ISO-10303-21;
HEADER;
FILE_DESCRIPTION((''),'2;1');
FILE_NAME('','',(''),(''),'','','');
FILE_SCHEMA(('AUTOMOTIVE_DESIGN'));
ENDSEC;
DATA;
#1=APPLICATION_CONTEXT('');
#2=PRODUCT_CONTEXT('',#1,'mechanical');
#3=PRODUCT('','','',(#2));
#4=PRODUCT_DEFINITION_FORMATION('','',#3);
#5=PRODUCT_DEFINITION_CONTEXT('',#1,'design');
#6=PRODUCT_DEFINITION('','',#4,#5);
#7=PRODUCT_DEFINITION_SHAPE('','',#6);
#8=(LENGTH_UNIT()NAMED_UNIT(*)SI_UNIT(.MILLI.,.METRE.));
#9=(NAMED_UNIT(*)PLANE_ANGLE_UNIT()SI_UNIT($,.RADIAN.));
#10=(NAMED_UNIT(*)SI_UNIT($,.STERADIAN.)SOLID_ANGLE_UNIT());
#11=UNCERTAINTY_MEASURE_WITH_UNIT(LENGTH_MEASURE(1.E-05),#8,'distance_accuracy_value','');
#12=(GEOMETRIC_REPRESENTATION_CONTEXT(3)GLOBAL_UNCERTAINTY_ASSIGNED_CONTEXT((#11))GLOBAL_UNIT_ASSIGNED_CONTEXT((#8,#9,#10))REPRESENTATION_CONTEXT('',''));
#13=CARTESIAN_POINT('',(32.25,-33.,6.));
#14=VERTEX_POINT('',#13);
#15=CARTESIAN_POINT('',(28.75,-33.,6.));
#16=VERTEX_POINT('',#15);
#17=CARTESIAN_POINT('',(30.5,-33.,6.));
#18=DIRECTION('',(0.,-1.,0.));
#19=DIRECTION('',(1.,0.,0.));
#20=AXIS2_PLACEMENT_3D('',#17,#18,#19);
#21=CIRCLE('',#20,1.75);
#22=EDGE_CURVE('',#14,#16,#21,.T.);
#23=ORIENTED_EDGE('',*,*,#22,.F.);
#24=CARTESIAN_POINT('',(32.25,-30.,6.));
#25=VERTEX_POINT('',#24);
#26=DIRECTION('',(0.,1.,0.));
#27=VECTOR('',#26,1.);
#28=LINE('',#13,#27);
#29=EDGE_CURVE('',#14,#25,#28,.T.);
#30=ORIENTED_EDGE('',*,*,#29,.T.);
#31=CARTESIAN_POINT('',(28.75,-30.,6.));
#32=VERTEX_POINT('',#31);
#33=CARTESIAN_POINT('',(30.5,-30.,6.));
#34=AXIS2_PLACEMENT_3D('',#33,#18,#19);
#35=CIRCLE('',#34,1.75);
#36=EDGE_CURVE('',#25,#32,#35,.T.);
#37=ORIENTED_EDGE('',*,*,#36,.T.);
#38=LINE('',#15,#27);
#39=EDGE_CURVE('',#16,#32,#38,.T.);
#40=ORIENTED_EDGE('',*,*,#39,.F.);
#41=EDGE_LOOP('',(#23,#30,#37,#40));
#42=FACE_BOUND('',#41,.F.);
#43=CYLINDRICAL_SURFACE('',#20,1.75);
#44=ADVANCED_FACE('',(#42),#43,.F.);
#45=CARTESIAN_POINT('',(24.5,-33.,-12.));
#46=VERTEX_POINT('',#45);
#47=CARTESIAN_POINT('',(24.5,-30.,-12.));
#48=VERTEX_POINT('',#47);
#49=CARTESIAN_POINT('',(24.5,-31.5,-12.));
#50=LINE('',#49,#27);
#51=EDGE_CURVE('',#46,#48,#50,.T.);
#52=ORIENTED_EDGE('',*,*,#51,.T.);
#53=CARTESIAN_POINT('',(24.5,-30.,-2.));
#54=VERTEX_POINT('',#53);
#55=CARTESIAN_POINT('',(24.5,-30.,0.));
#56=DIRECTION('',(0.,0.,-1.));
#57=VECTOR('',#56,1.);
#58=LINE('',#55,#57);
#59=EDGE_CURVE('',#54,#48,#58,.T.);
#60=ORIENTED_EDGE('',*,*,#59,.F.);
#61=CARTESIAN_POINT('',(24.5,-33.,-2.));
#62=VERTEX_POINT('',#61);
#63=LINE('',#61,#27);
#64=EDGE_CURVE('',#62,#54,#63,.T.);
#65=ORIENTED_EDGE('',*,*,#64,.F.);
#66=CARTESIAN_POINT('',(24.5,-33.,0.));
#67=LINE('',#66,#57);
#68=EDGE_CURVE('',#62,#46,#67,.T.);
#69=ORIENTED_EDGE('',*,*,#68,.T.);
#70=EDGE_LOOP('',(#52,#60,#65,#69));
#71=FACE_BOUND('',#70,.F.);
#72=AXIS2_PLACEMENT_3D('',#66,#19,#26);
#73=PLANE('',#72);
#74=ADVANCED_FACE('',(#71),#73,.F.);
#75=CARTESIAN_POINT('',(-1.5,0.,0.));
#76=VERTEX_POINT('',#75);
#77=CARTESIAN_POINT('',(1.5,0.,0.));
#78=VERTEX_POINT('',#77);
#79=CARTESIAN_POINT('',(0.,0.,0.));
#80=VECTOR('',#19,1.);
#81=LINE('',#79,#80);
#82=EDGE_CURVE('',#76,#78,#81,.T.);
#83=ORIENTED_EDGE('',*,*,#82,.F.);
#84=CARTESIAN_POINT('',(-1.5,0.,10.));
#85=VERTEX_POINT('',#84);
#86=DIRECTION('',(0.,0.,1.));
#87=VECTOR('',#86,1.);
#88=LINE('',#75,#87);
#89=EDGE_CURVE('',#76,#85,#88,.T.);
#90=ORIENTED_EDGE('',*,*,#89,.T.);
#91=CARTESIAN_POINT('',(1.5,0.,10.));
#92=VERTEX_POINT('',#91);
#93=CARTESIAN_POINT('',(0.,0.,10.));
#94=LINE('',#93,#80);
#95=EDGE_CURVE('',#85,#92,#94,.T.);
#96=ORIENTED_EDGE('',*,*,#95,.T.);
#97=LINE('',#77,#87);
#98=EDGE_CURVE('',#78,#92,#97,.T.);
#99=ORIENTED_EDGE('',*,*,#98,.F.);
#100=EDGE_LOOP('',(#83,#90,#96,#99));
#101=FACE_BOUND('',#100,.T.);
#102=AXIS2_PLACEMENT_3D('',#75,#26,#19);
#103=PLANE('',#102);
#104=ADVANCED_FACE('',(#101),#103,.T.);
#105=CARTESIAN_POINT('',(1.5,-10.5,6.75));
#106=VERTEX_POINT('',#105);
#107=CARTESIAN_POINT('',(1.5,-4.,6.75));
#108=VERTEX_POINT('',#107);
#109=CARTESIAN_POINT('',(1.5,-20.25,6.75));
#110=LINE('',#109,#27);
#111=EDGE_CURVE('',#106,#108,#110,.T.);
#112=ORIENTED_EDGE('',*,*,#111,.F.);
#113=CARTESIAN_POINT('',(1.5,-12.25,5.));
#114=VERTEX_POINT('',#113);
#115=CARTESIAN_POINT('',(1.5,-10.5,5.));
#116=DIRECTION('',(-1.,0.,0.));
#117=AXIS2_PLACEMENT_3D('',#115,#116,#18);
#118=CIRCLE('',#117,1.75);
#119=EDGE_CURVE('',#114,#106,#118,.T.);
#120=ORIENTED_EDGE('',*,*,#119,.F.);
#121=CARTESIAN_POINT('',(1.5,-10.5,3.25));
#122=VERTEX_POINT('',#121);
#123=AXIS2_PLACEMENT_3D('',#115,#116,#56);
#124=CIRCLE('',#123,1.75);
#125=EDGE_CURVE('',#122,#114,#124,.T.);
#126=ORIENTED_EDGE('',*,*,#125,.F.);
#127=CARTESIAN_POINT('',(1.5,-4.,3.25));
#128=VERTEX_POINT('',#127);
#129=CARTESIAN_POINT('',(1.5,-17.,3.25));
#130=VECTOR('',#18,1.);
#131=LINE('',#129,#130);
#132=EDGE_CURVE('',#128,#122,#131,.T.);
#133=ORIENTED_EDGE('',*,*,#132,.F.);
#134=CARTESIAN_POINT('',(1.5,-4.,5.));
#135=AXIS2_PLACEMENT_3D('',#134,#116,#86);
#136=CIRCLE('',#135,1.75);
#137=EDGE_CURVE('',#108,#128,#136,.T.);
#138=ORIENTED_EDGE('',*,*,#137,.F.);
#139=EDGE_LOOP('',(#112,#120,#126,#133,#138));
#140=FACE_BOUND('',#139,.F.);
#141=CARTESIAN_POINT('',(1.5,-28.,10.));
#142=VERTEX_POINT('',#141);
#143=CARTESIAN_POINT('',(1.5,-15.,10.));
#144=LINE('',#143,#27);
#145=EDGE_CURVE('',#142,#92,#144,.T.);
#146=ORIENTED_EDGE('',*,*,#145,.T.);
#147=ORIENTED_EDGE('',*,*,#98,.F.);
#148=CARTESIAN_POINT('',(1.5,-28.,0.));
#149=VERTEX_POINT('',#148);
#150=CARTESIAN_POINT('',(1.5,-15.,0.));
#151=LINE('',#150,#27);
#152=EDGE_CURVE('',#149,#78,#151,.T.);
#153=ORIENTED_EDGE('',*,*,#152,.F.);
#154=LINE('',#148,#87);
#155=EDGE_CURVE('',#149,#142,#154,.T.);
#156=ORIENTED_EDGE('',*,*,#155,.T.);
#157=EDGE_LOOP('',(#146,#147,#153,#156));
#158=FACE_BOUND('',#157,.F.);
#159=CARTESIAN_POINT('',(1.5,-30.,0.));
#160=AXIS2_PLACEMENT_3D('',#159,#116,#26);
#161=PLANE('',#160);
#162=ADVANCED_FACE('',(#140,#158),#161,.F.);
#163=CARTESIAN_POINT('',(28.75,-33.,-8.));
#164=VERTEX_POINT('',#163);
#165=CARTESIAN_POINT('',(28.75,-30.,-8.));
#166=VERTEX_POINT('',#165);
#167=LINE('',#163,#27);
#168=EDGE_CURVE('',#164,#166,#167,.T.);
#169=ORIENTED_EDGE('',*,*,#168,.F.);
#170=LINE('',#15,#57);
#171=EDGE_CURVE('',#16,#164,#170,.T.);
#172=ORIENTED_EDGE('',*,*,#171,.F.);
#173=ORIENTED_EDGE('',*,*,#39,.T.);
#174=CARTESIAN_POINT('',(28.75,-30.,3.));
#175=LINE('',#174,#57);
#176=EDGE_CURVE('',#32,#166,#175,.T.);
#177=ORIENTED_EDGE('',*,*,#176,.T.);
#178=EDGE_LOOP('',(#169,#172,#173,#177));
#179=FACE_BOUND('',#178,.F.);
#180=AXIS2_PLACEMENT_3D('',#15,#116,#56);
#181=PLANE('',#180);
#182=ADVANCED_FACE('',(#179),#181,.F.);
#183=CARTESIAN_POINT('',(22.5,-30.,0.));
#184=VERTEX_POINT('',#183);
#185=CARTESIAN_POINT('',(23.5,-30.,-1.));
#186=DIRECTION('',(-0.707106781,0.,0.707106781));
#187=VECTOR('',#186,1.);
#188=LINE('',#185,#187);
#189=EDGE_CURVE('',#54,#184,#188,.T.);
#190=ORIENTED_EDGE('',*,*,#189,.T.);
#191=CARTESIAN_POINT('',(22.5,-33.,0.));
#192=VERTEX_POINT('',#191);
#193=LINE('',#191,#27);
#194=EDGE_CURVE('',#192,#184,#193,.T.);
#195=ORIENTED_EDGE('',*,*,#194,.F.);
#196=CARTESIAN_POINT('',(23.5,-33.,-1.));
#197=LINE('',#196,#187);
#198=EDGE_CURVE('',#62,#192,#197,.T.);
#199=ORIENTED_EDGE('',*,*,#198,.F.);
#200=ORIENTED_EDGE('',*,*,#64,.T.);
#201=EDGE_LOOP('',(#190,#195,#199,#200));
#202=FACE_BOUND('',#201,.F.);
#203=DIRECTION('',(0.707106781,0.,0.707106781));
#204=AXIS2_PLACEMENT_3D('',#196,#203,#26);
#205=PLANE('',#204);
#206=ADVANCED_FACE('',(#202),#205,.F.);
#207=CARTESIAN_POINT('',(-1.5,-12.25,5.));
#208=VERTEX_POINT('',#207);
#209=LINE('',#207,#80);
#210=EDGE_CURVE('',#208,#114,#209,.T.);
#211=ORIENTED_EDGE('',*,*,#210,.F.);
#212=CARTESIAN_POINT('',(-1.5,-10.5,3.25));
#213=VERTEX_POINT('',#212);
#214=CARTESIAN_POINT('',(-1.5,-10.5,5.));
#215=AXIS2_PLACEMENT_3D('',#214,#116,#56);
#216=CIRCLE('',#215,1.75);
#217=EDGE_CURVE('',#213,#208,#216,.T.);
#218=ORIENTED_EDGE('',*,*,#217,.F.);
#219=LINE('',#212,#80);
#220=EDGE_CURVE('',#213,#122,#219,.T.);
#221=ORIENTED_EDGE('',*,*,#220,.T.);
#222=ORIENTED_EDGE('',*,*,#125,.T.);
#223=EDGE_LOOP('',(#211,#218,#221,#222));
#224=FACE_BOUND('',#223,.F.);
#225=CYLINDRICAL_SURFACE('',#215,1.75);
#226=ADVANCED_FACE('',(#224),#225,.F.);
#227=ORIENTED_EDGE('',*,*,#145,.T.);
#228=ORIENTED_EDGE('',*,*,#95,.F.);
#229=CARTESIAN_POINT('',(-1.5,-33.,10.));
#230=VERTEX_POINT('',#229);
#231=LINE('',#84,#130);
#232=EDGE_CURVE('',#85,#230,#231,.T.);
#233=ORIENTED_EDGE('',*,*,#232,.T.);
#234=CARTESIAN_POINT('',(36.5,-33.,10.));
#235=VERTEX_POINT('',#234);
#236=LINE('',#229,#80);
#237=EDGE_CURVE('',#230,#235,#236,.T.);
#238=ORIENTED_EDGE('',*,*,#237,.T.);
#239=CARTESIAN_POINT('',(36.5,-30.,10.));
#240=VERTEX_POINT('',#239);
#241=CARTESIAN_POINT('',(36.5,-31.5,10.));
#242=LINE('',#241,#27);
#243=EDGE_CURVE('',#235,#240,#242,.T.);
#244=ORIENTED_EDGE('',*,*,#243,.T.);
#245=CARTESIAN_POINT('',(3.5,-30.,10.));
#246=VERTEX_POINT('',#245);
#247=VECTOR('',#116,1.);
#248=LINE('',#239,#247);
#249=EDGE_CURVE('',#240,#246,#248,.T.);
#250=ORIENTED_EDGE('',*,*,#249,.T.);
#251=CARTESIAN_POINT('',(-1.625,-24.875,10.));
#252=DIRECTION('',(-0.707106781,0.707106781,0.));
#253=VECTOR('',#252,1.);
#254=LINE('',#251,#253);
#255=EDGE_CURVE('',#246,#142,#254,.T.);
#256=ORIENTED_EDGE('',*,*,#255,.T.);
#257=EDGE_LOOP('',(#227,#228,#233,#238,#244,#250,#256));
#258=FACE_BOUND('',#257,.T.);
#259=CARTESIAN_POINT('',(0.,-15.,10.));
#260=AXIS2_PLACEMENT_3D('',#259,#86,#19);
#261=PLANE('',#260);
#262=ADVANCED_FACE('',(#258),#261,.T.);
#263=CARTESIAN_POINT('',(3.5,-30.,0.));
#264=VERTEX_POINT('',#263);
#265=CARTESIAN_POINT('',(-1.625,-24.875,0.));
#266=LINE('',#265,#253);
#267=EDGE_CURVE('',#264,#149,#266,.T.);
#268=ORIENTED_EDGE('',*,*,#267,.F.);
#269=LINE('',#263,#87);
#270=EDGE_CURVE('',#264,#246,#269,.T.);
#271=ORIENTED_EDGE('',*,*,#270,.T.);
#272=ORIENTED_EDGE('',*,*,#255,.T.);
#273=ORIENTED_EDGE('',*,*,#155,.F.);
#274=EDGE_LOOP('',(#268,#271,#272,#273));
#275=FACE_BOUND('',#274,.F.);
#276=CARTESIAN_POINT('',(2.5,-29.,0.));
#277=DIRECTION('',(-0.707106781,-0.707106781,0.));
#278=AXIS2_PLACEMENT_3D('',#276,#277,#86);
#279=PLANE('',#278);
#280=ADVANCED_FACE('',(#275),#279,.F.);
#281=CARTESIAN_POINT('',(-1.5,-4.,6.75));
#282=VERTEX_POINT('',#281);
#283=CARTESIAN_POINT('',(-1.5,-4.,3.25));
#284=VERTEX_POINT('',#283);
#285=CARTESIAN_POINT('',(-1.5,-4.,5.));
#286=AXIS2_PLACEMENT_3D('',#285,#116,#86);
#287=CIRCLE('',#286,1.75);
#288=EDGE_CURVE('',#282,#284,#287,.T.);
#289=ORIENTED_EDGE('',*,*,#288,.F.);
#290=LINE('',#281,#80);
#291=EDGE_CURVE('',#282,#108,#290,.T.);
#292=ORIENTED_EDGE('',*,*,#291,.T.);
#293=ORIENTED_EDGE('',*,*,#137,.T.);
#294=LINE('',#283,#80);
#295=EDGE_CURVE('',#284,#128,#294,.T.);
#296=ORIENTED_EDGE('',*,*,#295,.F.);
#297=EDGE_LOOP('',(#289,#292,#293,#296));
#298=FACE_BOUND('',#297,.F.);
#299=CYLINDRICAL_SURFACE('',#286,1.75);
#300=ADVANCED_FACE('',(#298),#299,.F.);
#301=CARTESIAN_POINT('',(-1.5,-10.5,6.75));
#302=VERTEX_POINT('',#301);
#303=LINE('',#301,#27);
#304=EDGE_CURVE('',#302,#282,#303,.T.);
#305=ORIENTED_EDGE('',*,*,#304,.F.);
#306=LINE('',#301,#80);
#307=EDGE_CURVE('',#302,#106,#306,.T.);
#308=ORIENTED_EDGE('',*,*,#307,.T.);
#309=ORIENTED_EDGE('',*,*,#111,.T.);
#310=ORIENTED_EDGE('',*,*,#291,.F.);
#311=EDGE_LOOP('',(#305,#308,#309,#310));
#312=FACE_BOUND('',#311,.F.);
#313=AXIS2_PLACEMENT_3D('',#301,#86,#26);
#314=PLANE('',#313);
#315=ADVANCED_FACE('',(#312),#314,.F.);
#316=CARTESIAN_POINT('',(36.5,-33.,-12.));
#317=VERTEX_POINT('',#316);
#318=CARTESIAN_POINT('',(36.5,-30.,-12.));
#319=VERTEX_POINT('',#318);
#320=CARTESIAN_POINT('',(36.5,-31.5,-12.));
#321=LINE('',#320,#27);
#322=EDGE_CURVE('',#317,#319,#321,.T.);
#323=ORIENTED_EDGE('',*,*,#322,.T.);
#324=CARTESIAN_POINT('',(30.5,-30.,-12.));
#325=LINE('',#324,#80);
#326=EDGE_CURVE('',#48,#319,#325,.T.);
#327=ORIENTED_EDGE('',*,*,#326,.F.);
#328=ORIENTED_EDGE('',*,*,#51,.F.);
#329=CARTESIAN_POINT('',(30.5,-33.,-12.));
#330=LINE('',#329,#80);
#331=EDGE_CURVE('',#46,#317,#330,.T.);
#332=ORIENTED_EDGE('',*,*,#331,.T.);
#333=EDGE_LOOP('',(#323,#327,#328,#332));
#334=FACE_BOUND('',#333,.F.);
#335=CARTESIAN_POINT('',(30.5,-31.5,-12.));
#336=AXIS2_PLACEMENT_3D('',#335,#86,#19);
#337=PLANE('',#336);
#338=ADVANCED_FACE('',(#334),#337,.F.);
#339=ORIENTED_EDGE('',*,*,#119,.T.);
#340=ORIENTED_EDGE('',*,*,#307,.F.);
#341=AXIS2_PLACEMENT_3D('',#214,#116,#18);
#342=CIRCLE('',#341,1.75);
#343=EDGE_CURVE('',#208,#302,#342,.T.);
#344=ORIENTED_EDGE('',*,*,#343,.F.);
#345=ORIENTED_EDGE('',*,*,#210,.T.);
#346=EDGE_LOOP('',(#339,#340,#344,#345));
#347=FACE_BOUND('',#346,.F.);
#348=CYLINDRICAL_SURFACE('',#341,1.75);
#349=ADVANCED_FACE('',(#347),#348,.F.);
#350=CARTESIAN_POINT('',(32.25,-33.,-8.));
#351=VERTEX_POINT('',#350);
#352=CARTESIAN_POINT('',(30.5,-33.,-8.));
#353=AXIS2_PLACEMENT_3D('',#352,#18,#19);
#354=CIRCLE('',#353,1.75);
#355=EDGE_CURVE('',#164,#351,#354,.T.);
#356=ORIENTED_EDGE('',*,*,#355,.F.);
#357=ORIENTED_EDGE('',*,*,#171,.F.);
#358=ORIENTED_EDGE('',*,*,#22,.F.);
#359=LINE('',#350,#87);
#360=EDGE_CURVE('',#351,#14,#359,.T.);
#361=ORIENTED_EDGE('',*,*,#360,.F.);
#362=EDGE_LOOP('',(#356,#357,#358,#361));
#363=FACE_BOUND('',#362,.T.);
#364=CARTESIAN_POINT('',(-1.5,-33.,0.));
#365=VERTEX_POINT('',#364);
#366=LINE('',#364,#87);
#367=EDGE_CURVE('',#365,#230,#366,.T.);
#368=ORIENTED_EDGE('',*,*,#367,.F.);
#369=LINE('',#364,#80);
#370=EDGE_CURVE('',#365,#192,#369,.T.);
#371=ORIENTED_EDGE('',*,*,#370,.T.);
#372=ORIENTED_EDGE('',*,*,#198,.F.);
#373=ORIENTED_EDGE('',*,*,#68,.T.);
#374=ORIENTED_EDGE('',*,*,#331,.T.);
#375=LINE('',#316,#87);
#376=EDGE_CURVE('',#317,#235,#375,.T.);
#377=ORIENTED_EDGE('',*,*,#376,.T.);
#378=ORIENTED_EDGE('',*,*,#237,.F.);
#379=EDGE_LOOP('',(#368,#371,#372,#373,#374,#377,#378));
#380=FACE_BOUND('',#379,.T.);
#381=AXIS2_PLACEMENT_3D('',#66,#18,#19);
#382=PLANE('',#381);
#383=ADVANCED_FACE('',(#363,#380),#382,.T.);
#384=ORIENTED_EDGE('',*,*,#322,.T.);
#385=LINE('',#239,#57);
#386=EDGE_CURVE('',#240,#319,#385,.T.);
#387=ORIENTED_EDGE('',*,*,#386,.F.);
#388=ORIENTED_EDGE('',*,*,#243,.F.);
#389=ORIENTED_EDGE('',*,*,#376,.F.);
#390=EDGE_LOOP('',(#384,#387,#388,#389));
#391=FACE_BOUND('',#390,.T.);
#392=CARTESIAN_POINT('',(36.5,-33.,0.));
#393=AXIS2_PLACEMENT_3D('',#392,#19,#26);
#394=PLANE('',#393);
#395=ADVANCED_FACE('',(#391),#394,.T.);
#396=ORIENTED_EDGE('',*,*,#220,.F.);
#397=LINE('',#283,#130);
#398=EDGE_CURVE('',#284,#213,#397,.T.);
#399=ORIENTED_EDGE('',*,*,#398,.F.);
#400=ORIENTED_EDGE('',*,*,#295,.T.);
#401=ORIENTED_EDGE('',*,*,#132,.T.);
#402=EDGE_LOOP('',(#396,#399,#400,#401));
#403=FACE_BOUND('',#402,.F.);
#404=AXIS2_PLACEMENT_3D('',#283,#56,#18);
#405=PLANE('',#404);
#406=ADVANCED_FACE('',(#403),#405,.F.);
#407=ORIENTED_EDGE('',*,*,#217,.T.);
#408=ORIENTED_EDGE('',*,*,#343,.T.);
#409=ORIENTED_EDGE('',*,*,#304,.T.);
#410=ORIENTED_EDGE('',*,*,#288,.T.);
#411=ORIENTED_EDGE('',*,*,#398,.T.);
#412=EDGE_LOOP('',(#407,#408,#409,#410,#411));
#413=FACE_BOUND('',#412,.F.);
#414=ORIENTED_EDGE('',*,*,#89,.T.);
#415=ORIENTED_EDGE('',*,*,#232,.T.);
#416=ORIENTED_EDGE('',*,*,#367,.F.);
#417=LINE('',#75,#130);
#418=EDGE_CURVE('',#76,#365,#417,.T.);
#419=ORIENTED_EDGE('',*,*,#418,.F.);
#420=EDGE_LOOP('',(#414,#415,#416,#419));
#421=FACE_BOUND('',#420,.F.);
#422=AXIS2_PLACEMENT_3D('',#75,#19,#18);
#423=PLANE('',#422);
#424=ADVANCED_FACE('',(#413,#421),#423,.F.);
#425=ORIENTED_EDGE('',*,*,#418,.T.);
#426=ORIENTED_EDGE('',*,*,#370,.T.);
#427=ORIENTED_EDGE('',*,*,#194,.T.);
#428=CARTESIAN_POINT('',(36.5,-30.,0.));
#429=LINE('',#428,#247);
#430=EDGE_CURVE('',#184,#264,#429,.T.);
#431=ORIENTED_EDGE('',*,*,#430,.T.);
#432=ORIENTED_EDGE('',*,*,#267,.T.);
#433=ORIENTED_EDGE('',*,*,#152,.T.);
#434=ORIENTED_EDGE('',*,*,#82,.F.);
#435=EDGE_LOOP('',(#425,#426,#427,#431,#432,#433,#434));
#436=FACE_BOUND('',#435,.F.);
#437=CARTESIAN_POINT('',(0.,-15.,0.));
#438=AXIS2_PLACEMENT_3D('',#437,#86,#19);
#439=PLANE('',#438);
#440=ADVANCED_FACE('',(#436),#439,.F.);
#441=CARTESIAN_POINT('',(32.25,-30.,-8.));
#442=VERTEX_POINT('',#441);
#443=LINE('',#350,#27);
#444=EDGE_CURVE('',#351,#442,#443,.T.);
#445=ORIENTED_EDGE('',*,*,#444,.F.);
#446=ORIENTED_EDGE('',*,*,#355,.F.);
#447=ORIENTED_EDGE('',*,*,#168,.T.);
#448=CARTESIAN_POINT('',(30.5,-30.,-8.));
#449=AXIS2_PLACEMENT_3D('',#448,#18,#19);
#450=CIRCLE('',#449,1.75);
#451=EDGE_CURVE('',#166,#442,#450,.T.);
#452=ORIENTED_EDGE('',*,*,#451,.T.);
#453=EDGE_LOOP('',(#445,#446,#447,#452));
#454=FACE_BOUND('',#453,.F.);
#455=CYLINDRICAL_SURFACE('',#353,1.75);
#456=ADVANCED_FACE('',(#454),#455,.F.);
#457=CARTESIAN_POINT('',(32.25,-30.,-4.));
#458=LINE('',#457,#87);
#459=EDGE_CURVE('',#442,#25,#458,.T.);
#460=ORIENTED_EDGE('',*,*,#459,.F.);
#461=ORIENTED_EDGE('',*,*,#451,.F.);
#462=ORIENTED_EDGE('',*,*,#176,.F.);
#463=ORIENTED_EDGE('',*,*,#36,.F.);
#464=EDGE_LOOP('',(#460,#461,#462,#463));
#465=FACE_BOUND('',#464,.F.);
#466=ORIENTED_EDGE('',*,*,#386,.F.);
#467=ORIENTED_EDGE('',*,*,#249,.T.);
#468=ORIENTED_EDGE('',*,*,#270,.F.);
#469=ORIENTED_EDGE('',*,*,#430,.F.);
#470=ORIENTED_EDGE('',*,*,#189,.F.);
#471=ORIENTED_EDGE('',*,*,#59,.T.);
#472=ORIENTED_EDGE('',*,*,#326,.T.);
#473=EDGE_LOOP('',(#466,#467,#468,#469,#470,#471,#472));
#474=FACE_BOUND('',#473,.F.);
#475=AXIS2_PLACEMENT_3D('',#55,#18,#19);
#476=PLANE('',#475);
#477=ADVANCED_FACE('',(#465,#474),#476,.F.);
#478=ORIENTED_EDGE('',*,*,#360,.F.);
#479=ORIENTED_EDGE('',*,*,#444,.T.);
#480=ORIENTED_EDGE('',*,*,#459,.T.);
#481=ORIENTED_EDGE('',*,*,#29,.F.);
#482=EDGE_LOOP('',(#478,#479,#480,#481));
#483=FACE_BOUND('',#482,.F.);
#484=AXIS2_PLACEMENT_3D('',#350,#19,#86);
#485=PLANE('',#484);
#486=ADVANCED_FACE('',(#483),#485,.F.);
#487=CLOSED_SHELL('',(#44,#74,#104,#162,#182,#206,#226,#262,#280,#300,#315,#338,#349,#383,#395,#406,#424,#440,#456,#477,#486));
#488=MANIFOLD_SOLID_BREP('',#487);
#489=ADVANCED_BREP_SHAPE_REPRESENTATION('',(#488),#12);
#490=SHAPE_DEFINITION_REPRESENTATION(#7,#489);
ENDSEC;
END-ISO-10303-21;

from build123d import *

# Parameters (mm, degrees)
F4_W     = 3
F4_H     = 30
F4_W_2   = 12
F4_H_2   = 3
F5_DEPTH = 10
F0_DEPTH = 12
F2_DEPTH = 38.001
F7_DEPTH = 33.001
F3_SIZE  = 2


# Not quite as in the source:
# - a feature names something its author has since deleted; it is built from what else it names


with BuildPart() as f5:
    # F4 (on Top) → F5 (new body)
    with BuildSketch(Plane.XY):
        with Locations((0, -15)):
            Rectangle(F4_W, F4_H)
        Polygon((1.5, -30), (-1.5, -30), (-1.5, -33), (24.5, -33), (24.5, -30), align=None)
        with Locations((30.5, -31.5)):
            Rectangle(F4_W_2, F4_H_2)
    extrude(amount=F5_DEPTH)

    # F4 (on Top) → F0 (join)
    with BuildSketch(Plane.XY):
        with Locations((30.5, -31.5)):
            Rectangle(F4_W_2, F4_H_2)
    extrude(amount=-F0_DEPTH)

    # F1 (on face) → F2 (cut, through all)
    with BuildSketch(Plane(origin=(-1.5, 0, 0), x_dir=(0, -1, 0), z_dir=(-1, 0, 0))):
        with BuildLine():
            ThreePointArc((4, 3.25), (5.2374368671, 3.7625631329), (5.75, 5))
            ThreePointArc((5.75, 5), (5.2374368671, 6.2374368671), (4, 6.75))
            ThreePointArc((4, 6.75), (2.25, 5), (4, 3.25))
        make_face()
        with BuildLine():
            ThreePointArc((4, 6.75), (5.2374368671, 6.2374368671), (5.75, 5))
            ThreePointArc((5.75, 5), (5.2374368671, 3.7625631329), (4, 3.25))
            Line((4, 3.25), (10.5, 3.25))
            ThreePointArc((10.5, 3.25), (8.75, 5), (10.5, 6.75))
            Line((10.5, 6.75), (4, 6.75))
        make_face()
        with BuildLine():
            ThreePointArc((12.25, 5), (11.7374368671, 6.2374368671), (10.5, 6.75))
            ThreePointArc((10.5, 6.75), (8.75, 5), (10.5, 3.25))
            ThreePointArc((10.5, 3.25), (11.7374368671, 3.7625631329), (12.25, 5))
        make_face()
    extrude(amount=-F2_DEPTH, mode=Mode.SUBTRACT)

    # F6 (on face) → F7 (cut, through all)
    with BuildSketch(Plane.XZ.offset(33)):
        with BuildLine():
            ThreePointArc((28.75, -8), (30.5, -6.25), (32.25, -8))
            Line((32.25, -8), (32.25, 6))
            ThreePointArc((32.25, 6), (30.5, 4.25), (28.75, 6))
            Line((28.75, 6), (28.75, -8))
        make_face()
        with BuildLine():
            ThreePointArc((28.75, -8), (30.5, -9.75), (32.25, -8))
            ThreePointArc((32.25, -8), (30.5, -6.25), (28.75, -8))
        make_face()
        with BuildLine():
            ThreePointArc((28.75, 6), (30.5, 4.25), (32.25, 6))
            ThreePointArc((32.25, 6), (30.5, 7.75), (28.75, 6))
        make_face()
    extrude(amount=-F7_DEPTH, mode=Mode.SUBTRACT)

    # F3
    f3_edges = [f5.edges().sort_by_distance(p)[0] for p in [
        (1.5, -30, 5),
        (24.5, -31.5, 0),
    ]]
    chamfer(f3_edges, length=F3_SIZE)


solid = f5.part
